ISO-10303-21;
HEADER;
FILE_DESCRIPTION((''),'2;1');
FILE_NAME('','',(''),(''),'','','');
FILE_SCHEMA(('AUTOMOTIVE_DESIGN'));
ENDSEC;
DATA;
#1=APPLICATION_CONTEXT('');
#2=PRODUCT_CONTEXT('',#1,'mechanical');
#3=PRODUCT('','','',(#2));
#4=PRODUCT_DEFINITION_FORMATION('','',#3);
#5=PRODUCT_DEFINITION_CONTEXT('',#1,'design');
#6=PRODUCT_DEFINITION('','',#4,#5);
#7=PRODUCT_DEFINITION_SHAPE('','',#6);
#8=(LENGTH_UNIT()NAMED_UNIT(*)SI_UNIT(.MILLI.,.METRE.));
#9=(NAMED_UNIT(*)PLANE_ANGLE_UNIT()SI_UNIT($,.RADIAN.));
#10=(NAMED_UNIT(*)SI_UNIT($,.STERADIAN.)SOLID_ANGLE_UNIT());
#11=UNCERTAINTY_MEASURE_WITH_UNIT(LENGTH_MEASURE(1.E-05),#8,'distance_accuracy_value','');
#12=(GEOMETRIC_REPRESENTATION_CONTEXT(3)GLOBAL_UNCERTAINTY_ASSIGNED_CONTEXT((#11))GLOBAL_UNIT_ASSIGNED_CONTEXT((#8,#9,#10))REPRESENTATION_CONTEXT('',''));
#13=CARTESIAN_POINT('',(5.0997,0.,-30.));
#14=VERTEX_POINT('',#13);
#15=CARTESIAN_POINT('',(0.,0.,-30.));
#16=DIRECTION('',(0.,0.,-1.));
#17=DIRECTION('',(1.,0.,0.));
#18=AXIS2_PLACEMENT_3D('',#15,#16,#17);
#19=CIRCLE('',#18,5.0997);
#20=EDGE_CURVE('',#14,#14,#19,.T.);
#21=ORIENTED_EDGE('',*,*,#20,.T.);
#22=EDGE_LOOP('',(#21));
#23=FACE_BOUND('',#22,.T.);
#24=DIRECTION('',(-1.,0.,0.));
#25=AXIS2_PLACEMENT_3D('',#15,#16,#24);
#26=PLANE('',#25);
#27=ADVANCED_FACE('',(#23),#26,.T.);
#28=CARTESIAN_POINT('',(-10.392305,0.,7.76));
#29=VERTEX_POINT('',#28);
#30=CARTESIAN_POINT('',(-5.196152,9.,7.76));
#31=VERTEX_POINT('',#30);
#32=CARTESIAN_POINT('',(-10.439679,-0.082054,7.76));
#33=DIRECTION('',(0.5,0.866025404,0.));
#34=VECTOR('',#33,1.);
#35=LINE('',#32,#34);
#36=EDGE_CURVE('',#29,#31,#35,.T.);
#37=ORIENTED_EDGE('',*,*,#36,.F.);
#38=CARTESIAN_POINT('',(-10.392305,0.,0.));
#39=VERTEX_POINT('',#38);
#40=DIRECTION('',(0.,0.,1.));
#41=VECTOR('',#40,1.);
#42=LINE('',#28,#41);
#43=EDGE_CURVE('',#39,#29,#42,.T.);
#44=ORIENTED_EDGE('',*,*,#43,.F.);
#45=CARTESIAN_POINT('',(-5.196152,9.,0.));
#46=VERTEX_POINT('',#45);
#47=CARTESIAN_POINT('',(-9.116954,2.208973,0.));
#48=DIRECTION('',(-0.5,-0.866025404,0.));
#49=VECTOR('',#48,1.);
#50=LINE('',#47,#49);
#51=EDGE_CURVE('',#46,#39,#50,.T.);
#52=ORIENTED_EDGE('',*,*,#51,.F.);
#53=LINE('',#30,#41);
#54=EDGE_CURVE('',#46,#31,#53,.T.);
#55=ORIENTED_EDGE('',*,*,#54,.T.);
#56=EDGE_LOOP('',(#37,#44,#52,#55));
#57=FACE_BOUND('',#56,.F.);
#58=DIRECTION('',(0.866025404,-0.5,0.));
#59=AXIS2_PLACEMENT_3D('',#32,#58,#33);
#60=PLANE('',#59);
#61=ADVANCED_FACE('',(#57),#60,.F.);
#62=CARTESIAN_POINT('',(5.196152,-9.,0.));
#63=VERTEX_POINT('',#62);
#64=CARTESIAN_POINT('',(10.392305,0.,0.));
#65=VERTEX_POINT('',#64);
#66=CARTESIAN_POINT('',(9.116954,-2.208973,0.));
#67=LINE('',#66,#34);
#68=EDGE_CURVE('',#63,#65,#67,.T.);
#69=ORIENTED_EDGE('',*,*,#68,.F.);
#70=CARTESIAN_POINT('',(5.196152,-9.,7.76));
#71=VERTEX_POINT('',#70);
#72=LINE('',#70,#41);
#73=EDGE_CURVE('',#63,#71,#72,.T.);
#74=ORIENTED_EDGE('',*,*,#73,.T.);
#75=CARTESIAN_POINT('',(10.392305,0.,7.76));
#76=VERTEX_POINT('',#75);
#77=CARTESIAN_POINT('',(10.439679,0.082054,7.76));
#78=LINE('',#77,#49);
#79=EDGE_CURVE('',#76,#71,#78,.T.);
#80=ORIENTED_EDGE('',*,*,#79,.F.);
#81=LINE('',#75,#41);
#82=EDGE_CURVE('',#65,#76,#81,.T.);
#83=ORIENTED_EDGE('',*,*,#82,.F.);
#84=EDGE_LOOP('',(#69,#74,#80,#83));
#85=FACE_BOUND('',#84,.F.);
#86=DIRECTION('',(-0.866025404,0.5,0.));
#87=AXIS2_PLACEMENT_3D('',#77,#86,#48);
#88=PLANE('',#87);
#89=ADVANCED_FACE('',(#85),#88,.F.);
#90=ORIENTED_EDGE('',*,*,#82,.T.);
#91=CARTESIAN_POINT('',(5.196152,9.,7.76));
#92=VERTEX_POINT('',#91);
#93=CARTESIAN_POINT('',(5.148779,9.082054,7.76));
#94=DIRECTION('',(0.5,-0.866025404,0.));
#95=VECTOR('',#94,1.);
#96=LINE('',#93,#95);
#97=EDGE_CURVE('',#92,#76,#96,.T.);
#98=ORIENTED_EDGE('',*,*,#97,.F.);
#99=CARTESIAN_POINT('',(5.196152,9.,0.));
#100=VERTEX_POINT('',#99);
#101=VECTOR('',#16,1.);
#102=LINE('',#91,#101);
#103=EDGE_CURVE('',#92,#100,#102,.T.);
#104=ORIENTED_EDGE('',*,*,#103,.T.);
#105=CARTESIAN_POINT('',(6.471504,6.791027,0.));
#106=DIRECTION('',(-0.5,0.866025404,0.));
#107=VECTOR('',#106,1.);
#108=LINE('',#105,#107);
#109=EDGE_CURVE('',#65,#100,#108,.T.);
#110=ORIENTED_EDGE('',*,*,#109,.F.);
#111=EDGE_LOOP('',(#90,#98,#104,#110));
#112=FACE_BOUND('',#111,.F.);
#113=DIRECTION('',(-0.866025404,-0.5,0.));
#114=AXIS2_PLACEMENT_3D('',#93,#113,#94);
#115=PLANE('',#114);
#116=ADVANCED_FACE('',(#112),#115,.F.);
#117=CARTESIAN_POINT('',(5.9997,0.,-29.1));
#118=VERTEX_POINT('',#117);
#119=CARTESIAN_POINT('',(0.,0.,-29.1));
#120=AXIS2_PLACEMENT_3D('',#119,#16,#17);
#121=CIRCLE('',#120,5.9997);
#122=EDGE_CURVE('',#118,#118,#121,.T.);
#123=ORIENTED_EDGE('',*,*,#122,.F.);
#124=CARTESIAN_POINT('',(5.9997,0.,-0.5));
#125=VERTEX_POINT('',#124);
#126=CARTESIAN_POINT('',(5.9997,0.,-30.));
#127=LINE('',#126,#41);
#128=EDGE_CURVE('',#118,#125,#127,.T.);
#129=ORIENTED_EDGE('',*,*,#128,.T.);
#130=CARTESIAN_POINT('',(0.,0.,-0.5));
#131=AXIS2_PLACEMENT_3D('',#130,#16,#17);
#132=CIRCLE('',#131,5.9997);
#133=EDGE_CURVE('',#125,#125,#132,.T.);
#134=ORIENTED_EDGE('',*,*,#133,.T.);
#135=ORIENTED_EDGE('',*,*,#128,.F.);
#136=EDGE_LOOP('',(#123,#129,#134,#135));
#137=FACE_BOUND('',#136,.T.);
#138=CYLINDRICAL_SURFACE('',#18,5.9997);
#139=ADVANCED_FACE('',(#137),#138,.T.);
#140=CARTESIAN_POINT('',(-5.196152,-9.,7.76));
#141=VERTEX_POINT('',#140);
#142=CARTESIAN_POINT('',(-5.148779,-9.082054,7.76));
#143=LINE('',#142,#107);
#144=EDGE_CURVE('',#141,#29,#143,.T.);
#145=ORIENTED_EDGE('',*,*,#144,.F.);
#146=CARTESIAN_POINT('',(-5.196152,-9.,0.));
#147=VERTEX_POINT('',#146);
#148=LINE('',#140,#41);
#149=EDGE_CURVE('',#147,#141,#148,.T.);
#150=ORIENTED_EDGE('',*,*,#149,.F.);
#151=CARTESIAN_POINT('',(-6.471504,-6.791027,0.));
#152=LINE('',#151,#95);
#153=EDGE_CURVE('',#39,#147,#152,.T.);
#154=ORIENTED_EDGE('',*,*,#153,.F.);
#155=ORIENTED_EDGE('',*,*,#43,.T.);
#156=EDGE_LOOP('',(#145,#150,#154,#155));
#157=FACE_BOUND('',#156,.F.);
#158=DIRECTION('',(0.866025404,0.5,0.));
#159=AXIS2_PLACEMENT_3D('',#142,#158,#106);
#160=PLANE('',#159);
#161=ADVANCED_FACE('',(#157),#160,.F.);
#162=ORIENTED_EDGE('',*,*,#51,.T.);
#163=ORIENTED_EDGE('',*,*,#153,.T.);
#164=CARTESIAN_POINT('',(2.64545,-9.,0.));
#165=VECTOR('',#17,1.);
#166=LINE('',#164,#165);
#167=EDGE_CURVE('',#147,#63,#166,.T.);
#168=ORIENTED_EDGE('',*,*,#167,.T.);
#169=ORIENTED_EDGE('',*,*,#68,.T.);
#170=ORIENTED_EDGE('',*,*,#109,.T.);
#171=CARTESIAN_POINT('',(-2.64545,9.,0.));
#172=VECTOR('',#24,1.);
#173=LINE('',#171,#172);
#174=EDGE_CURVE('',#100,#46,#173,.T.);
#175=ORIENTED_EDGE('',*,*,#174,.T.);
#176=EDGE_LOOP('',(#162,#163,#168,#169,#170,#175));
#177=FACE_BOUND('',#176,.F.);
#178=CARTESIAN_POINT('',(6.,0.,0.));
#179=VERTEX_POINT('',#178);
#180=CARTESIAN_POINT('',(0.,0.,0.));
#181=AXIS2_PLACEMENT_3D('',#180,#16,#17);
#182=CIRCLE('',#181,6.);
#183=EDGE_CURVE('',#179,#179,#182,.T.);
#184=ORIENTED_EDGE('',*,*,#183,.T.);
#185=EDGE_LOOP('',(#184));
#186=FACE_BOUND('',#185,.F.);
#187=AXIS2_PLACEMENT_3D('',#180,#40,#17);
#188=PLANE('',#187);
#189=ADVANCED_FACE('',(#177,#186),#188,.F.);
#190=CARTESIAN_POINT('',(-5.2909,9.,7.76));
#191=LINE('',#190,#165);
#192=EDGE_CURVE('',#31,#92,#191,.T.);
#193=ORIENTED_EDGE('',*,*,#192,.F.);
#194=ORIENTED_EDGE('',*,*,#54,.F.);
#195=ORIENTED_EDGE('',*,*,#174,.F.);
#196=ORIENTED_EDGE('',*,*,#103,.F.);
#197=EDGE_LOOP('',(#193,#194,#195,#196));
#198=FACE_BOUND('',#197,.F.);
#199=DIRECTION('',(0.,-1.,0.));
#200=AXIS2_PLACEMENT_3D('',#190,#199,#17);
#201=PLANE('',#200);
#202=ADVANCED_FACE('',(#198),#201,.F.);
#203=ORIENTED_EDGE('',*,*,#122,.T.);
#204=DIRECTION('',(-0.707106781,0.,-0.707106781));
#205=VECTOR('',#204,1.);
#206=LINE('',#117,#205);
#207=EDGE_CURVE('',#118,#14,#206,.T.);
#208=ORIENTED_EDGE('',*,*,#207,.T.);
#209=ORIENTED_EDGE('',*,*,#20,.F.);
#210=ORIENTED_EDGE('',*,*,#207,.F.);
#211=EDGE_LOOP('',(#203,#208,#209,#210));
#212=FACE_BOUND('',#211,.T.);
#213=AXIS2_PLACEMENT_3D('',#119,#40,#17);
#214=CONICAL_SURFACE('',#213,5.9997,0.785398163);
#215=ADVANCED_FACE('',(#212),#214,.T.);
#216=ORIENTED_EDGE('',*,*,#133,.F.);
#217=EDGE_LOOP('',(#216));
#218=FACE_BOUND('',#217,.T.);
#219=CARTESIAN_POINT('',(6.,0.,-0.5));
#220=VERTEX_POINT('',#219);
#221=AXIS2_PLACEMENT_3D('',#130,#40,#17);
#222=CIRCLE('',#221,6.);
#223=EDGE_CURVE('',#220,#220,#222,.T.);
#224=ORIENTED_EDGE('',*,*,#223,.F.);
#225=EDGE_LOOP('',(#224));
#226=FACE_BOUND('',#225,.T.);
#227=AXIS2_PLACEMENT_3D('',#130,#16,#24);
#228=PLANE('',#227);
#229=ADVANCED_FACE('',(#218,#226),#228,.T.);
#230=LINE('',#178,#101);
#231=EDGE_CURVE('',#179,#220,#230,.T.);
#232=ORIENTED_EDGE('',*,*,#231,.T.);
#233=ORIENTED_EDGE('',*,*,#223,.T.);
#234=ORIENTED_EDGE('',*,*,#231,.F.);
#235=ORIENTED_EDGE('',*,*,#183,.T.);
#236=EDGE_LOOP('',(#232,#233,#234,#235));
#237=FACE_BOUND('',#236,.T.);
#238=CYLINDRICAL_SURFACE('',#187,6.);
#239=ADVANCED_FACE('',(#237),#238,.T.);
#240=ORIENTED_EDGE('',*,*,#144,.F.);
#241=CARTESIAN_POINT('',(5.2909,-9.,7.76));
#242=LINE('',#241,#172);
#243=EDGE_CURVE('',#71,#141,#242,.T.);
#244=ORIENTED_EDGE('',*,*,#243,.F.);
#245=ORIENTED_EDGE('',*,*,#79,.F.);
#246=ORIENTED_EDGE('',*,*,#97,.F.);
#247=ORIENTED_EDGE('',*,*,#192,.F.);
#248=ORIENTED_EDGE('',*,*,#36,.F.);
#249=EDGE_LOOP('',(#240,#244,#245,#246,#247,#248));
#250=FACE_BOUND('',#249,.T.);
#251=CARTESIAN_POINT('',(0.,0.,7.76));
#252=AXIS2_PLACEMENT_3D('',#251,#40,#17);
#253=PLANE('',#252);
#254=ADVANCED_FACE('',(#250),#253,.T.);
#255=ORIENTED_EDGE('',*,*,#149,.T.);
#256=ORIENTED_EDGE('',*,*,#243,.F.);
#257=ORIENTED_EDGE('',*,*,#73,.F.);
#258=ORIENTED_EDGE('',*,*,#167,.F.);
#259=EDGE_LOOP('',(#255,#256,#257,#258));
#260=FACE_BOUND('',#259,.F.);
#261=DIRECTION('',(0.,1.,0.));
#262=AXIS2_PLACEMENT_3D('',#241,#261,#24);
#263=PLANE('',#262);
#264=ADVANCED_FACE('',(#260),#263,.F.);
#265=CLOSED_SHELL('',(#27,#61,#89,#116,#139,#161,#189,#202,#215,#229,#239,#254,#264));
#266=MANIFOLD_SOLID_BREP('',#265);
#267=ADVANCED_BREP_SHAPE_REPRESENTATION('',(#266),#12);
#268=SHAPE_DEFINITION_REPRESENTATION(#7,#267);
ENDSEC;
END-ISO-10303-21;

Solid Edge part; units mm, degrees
sketch "Sketch1" plane through (0, 0, 0) normal (0, 0, 1) x (1, 0, 0)
  circle A0 centre (0, 0) radius 10.44
  dimension "D1" = 20.88
extrude "Protrusion1" add sketch "Sketch1" along normal blind 7.76
sketch "Sketch2" plane through (0, 0, 0) normal (0, 0, -1) x (1, 0, 0)
  circle A0 centre (0, 0) radius 6
extrude "Protrusion2" add sketch "Sketch2" along normal blind 30
sketch "Sketch3" plane through (0, 0, -30) normal (0, 0, -1) x (1, 0, 0)
  circle A0 centre (0, 0) radius 5.9997
extrude "Cutout1" cut sketch "Sketch3" against normal blind 29.5 flip side to cut
chamfer "Chamfer_1" distance 0.9 angle 45 1 edges at (-5.9997, 0, -30)
sketch "Sketch4" plane through (0, 0, 7.76) normal (0, 0, 1) x (1, 0, 0)
  line L0 (-5.2909, 9) -> (5.2909, 9)
  dimension "D1" = 18
extrude "Cutout2" cut sketch "Sketch4" against normal up to next material side at (0, 9.05, 7.76)
pattern_circular "Pattern1" count 6 over 360 about axis through (0, 0, 7.76) along (0, 0, 1) of "Cutout2"
properties part number "24104236"
